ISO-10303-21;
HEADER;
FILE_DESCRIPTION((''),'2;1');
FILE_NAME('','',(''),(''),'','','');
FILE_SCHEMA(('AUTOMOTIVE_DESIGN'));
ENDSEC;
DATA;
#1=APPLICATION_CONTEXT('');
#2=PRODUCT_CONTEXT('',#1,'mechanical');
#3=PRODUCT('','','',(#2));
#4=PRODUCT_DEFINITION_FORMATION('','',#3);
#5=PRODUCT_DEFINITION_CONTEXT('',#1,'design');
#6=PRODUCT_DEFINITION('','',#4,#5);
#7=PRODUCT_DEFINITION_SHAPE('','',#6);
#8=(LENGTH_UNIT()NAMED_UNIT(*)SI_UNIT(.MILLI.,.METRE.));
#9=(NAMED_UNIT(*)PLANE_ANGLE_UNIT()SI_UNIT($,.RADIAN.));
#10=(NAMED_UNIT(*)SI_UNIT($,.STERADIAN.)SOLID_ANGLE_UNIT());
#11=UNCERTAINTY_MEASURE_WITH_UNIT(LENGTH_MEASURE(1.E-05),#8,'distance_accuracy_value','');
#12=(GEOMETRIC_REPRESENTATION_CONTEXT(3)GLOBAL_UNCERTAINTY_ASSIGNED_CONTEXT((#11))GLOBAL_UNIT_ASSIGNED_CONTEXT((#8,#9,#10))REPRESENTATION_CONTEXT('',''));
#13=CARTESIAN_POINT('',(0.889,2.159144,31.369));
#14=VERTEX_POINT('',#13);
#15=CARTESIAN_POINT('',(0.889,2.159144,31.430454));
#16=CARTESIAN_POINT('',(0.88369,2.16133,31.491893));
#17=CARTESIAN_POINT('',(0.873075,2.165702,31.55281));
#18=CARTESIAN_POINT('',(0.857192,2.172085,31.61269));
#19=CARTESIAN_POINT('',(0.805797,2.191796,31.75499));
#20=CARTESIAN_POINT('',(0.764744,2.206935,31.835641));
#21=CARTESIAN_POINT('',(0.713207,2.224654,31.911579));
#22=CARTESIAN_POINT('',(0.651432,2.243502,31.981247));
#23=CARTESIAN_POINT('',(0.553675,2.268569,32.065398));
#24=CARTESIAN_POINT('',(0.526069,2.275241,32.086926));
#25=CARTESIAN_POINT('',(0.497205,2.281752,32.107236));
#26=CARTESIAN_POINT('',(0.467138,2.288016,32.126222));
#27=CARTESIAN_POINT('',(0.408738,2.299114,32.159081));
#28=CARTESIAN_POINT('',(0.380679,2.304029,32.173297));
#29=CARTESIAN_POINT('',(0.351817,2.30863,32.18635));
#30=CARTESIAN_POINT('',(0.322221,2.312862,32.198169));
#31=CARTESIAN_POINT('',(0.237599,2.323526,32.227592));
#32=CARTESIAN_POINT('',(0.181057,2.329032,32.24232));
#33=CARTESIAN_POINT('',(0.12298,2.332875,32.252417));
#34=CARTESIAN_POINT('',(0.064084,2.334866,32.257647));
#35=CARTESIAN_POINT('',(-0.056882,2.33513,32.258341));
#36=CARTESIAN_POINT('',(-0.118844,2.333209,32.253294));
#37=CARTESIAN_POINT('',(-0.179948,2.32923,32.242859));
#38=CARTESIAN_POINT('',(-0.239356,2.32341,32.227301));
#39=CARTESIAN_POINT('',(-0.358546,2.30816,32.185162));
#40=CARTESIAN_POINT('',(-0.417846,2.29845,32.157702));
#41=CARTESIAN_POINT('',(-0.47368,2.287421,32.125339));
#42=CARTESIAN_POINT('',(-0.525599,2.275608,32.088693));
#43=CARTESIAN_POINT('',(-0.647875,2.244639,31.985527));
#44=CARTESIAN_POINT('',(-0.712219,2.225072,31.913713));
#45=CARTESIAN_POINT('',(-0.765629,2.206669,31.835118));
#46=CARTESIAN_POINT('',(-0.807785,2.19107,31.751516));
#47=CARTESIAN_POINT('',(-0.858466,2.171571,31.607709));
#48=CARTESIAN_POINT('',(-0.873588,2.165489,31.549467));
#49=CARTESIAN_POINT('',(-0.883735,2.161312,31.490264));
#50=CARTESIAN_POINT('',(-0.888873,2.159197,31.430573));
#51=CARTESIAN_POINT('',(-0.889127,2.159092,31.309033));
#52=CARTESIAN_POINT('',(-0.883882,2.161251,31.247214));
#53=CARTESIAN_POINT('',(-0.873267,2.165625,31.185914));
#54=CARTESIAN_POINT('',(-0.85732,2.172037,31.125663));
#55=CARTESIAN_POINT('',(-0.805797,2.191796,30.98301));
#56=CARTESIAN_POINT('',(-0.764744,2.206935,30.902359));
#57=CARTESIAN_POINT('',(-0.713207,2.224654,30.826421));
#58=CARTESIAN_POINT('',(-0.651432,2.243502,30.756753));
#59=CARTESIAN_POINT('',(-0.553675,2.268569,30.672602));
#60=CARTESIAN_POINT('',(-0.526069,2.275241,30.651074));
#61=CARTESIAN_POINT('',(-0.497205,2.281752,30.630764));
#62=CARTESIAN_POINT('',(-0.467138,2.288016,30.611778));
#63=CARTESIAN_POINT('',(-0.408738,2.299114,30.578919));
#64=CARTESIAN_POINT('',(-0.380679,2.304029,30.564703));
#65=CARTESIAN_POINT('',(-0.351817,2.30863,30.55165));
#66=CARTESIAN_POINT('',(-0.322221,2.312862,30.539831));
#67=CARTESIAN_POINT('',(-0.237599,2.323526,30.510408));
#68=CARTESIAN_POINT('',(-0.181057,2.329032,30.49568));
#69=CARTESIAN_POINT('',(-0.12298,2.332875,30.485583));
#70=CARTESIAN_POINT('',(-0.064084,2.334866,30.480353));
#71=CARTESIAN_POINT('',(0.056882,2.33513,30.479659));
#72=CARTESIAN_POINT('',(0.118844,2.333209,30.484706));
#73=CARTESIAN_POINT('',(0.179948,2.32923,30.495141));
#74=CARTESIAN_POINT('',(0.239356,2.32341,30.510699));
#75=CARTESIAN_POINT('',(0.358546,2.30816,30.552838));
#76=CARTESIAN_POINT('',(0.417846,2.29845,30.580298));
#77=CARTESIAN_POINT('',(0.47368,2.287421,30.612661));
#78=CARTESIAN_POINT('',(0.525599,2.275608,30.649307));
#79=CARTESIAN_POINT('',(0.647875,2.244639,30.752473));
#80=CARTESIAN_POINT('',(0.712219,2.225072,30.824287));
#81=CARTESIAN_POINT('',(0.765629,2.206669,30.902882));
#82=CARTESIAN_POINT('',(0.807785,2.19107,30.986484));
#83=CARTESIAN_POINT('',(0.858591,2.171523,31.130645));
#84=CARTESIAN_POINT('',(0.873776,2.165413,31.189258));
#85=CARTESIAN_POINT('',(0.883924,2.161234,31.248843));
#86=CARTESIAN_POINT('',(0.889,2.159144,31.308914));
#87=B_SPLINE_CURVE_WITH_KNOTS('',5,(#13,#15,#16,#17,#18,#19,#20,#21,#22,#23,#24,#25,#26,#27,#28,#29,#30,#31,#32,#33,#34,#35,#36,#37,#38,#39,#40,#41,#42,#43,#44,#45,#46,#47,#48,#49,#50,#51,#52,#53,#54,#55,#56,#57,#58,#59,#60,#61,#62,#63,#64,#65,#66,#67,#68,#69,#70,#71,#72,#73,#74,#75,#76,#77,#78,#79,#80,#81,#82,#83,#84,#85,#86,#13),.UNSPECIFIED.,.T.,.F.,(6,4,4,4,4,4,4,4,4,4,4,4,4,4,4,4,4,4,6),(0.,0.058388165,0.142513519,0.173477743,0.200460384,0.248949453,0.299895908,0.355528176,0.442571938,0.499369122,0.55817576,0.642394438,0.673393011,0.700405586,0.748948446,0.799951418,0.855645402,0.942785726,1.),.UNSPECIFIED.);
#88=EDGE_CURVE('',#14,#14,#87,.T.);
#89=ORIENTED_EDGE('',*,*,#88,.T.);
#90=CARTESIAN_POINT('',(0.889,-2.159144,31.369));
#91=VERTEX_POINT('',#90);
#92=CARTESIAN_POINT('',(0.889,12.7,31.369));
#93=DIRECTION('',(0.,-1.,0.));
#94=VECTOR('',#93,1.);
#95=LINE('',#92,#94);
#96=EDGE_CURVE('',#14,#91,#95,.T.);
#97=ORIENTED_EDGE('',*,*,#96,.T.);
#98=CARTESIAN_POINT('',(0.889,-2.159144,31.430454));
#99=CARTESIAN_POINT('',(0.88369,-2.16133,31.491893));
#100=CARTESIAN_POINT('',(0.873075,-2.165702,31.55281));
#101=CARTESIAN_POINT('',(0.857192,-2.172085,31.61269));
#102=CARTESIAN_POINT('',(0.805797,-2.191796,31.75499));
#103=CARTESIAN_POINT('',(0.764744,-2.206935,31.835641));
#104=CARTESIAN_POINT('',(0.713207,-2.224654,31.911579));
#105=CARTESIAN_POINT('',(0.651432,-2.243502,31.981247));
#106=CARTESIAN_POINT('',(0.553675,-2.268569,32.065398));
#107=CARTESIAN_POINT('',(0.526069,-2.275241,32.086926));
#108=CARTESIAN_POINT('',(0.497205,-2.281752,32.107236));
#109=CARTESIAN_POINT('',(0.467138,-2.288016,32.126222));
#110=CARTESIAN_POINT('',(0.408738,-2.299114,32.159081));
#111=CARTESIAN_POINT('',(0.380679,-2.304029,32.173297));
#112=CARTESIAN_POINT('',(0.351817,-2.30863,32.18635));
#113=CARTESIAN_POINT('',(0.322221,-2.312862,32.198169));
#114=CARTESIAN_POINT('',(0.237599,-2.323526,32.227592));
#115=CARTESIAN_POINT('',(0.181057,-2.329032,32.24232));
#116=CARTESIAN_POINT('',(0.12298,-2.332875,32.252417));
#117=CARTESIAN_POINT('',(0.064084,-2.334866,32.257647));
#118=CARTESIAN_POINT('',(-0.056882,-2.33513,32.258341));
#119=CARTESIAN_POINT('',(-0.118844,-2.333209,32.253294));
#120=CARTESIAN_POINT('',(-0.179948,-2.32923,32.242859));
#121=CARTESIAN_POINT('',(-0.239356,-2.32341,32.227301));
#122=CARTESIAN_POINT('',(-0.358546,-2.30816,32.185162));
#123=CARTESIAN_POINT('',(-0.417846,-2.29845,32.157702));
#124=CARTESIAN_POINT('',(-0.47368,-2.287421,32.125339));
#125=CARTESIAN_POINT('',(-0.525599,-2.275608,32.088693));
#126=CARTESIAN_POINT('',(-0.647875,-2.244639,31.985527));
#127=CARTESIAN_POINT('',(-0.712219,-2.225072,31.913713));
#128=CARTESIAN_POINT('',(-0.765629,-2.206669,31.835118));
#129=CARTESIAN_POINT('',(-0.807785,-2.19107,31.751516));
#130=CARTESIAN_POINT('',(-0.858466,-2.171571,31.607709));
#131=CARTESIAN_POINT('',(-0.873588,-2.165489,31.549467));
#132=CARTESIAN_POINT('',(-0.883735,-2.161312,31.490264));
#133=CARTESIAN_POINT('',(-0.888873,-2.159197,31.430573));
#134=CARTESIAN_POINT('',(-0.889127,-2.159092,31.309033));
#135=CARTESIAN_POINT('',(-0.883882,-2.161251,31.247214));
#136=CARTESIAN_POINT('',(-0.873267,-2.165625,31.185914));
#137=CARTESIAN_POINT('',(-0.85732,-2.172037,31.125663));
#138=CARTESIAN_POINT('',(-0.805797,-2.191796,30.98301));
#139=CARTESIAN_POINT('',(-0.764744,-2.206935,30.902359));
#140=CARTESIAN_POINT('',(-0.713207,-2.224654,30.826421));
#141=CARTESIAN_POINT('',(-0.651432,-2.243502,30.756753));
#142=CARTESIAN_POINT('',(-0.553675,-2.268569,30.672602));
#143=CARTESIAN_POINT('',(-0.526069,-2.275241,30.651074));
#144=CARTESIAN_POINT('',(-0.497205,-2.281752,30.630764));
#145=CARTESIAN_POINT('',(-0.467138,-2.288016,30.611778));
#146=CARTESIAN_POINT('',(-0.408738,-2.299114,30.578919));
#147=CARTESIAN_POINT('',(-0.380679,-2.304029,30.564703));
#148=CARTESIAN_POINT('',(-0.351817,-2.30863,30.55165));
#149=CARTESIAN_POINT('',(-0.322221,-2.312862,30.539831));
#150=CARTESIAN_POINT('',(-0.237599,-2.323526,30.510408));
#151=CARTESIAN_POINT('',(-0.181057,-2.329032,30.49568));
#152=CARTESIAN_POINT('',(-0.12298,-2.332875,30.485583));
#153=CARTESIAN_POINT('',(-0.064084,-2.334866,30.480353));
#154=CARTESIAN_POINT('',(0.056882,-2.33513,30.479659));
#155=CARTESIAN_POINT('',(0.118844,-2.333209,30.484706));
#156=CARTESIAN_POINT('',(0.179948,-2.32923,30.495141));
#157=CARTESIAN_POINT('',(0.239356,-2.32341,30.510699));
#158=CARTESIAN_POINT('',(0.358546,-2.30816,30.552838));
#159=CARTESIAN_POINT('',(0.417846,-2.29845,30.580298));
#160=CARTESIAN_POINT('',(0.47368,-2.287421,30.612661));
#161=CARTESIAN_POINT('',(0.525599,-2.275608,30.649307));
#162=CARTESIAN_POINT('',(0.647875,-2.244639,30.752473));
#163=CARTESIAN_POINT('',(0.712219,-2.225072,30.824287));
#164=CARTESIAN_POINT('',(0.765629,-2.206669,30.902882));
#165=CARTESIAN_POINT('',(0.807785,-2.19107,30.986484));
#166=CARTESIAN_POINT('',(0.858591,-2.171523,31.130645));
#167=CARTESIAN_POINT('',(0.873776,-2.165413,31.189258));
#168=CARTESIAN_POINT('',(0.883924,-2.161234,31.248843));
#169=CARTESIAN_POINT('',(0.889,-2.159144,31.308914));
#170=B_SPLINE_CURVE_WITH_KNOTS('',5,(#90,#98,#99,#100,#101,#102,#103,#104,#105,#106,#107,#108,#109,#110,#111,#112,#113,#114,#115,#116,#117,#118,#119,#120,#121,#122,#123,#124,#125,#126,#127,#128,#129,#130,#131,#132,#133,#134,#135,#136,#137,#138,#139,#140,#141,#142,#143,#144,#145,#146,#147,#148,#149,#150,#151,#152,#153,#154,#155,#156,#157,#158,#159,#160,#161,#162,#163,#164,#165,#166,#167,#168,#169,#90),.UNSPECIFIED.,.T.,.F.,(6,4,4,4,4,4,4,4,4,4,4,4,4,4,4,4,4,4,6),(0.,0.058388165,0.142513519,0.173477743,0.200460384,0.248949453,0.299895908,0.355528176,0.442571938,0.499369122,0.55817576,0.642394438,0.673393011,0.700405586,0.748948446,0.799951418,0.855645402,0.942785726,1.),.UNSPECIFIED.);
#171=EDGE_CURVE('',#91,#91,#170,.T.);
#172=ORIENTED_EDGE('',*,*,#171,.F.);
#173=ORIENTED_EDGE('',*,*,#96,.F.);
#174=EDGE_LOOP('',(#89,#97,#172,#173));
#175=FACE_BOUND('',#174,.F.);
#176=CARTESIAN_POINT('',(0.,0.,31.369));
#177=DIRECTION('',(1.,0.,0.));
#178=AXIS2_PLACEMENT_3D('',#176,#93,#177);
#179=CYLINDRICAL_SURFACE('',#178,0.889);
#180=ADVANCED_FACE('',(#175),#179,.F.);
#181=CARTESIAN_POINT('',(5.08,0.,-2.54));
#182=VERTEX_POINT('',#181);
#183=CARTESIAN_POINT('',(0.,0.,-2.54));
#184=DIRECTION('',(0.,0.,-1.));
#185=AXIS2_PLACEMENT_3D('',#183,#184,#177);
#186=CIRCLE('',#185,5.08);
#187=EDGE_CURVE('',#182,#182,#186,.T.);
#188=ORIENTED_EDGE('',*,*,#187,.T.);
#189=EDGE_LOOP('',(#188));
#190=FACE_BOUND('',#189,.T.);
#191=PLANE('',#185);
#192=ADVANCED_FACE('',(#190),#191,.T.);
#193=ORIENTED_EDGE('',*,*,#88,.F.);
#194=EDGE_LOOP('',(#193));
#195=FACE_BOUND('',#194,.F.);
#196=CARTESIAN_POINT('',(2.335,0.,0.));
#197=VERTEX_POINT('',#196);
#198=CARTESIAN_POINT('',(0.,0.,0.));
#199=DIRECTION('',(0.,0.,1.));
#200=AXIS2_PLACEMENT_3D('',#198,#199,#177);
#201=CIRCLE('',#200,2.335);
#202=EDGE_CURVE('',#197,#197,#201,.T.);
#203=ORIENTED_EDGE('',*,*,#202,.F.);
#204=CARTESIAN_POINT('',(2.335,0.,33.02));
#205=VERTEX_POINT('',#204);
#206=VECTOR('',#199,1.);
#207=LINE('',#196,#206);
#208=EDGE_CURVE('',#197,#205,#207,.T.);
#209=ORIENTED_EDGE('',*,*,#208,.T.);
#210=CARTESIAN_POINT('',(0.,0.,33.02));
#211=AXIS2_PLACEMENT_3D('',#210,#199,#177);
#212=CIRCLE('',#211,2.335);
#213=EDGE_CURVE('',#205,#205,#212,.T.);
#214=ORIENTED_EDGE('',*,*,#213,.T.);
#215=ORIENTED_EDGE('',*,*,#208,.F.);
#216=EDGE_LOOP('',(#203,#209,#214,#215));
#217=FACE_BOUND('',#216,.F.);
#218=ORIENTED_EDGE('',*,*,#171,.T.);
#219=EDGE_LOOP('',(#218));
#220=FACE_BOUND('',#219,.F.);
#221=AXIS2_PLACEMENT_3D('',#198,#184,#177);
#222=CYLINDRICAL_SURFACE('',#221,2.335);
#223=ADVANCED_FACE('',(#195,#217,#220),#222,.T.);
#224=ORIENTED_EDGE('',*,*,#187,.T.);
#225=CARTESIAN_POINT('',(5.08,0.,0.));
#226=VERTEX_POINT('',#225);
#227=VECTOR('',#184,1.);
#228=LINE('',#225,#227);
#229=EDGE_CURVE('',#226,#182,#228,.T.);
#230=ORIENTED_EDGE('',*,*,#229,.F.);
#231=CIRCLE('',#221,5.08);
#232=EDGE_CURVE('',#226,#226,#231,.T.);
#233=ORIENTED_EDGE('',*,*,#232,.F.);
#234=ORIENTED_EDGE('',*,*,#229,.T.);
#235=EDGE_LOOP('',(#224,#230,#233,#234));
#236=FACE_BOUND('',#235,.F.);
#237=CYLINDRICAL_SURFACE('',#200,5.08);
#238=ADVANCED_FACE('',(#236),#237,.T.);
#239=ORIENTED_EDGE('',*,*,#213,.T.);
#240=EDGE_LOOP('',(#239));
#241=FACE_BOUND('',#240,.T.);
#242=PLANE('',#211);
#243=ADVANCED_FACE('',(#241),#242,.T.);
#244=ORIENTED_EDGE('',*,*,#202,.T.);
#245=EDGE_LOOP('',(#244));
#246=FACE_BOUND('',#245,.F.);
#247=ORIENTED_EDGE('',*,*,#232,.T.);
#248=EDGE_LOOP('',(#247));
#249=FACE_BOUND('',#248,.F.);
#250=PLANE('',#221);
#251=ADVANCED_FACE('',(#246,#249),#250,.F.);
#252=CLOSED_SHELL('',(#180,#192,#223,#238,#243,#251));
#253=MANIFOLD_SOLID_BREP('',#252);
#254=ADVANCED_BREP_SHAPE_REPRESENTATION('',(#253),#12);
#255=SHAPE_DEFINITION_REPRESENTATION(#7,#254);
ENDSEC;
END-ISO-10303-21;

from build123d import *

# Parameters (mm, degrees)
F0_R     = 2.335
F1_DEPTH = 33.02
F2_R     = 5.08
F2_R_2   = 2.335
F3_DEPTH = 2.54
F4_R     = 0.889
F5_DEPTH = 12.7


with BuildPart() as f1:
    # F0 (on Top) → F1 (new body)
    with BuildSketch(Plane.XY):
        Circle(F0_R)
    extrude(amount=F1_DEPTH)

    # F2 (on face) → F3 (join)
    with BuildSketch(Plane(origin=(0, 0, 0), x_dir=(1, 0, 0), z_dir=(0, 0, -1))):
        Circle(F2_R)
        Circle(F2_R_2, mode=Mode.SUBTRACT)
        Circle(F2_R_2)
    extrude(amount=F3_DEPTH)

    # F4 (on Front) → F5 (cut, symmetric)
    with BuildSketch(Plane.XZ):
        with Locations((0, 31.369)):
            Circle(F4_R)
    extrude(amount=F5_DEPTH, both=True, mode=Mode.SUBTRACT)


solid = f1.part
